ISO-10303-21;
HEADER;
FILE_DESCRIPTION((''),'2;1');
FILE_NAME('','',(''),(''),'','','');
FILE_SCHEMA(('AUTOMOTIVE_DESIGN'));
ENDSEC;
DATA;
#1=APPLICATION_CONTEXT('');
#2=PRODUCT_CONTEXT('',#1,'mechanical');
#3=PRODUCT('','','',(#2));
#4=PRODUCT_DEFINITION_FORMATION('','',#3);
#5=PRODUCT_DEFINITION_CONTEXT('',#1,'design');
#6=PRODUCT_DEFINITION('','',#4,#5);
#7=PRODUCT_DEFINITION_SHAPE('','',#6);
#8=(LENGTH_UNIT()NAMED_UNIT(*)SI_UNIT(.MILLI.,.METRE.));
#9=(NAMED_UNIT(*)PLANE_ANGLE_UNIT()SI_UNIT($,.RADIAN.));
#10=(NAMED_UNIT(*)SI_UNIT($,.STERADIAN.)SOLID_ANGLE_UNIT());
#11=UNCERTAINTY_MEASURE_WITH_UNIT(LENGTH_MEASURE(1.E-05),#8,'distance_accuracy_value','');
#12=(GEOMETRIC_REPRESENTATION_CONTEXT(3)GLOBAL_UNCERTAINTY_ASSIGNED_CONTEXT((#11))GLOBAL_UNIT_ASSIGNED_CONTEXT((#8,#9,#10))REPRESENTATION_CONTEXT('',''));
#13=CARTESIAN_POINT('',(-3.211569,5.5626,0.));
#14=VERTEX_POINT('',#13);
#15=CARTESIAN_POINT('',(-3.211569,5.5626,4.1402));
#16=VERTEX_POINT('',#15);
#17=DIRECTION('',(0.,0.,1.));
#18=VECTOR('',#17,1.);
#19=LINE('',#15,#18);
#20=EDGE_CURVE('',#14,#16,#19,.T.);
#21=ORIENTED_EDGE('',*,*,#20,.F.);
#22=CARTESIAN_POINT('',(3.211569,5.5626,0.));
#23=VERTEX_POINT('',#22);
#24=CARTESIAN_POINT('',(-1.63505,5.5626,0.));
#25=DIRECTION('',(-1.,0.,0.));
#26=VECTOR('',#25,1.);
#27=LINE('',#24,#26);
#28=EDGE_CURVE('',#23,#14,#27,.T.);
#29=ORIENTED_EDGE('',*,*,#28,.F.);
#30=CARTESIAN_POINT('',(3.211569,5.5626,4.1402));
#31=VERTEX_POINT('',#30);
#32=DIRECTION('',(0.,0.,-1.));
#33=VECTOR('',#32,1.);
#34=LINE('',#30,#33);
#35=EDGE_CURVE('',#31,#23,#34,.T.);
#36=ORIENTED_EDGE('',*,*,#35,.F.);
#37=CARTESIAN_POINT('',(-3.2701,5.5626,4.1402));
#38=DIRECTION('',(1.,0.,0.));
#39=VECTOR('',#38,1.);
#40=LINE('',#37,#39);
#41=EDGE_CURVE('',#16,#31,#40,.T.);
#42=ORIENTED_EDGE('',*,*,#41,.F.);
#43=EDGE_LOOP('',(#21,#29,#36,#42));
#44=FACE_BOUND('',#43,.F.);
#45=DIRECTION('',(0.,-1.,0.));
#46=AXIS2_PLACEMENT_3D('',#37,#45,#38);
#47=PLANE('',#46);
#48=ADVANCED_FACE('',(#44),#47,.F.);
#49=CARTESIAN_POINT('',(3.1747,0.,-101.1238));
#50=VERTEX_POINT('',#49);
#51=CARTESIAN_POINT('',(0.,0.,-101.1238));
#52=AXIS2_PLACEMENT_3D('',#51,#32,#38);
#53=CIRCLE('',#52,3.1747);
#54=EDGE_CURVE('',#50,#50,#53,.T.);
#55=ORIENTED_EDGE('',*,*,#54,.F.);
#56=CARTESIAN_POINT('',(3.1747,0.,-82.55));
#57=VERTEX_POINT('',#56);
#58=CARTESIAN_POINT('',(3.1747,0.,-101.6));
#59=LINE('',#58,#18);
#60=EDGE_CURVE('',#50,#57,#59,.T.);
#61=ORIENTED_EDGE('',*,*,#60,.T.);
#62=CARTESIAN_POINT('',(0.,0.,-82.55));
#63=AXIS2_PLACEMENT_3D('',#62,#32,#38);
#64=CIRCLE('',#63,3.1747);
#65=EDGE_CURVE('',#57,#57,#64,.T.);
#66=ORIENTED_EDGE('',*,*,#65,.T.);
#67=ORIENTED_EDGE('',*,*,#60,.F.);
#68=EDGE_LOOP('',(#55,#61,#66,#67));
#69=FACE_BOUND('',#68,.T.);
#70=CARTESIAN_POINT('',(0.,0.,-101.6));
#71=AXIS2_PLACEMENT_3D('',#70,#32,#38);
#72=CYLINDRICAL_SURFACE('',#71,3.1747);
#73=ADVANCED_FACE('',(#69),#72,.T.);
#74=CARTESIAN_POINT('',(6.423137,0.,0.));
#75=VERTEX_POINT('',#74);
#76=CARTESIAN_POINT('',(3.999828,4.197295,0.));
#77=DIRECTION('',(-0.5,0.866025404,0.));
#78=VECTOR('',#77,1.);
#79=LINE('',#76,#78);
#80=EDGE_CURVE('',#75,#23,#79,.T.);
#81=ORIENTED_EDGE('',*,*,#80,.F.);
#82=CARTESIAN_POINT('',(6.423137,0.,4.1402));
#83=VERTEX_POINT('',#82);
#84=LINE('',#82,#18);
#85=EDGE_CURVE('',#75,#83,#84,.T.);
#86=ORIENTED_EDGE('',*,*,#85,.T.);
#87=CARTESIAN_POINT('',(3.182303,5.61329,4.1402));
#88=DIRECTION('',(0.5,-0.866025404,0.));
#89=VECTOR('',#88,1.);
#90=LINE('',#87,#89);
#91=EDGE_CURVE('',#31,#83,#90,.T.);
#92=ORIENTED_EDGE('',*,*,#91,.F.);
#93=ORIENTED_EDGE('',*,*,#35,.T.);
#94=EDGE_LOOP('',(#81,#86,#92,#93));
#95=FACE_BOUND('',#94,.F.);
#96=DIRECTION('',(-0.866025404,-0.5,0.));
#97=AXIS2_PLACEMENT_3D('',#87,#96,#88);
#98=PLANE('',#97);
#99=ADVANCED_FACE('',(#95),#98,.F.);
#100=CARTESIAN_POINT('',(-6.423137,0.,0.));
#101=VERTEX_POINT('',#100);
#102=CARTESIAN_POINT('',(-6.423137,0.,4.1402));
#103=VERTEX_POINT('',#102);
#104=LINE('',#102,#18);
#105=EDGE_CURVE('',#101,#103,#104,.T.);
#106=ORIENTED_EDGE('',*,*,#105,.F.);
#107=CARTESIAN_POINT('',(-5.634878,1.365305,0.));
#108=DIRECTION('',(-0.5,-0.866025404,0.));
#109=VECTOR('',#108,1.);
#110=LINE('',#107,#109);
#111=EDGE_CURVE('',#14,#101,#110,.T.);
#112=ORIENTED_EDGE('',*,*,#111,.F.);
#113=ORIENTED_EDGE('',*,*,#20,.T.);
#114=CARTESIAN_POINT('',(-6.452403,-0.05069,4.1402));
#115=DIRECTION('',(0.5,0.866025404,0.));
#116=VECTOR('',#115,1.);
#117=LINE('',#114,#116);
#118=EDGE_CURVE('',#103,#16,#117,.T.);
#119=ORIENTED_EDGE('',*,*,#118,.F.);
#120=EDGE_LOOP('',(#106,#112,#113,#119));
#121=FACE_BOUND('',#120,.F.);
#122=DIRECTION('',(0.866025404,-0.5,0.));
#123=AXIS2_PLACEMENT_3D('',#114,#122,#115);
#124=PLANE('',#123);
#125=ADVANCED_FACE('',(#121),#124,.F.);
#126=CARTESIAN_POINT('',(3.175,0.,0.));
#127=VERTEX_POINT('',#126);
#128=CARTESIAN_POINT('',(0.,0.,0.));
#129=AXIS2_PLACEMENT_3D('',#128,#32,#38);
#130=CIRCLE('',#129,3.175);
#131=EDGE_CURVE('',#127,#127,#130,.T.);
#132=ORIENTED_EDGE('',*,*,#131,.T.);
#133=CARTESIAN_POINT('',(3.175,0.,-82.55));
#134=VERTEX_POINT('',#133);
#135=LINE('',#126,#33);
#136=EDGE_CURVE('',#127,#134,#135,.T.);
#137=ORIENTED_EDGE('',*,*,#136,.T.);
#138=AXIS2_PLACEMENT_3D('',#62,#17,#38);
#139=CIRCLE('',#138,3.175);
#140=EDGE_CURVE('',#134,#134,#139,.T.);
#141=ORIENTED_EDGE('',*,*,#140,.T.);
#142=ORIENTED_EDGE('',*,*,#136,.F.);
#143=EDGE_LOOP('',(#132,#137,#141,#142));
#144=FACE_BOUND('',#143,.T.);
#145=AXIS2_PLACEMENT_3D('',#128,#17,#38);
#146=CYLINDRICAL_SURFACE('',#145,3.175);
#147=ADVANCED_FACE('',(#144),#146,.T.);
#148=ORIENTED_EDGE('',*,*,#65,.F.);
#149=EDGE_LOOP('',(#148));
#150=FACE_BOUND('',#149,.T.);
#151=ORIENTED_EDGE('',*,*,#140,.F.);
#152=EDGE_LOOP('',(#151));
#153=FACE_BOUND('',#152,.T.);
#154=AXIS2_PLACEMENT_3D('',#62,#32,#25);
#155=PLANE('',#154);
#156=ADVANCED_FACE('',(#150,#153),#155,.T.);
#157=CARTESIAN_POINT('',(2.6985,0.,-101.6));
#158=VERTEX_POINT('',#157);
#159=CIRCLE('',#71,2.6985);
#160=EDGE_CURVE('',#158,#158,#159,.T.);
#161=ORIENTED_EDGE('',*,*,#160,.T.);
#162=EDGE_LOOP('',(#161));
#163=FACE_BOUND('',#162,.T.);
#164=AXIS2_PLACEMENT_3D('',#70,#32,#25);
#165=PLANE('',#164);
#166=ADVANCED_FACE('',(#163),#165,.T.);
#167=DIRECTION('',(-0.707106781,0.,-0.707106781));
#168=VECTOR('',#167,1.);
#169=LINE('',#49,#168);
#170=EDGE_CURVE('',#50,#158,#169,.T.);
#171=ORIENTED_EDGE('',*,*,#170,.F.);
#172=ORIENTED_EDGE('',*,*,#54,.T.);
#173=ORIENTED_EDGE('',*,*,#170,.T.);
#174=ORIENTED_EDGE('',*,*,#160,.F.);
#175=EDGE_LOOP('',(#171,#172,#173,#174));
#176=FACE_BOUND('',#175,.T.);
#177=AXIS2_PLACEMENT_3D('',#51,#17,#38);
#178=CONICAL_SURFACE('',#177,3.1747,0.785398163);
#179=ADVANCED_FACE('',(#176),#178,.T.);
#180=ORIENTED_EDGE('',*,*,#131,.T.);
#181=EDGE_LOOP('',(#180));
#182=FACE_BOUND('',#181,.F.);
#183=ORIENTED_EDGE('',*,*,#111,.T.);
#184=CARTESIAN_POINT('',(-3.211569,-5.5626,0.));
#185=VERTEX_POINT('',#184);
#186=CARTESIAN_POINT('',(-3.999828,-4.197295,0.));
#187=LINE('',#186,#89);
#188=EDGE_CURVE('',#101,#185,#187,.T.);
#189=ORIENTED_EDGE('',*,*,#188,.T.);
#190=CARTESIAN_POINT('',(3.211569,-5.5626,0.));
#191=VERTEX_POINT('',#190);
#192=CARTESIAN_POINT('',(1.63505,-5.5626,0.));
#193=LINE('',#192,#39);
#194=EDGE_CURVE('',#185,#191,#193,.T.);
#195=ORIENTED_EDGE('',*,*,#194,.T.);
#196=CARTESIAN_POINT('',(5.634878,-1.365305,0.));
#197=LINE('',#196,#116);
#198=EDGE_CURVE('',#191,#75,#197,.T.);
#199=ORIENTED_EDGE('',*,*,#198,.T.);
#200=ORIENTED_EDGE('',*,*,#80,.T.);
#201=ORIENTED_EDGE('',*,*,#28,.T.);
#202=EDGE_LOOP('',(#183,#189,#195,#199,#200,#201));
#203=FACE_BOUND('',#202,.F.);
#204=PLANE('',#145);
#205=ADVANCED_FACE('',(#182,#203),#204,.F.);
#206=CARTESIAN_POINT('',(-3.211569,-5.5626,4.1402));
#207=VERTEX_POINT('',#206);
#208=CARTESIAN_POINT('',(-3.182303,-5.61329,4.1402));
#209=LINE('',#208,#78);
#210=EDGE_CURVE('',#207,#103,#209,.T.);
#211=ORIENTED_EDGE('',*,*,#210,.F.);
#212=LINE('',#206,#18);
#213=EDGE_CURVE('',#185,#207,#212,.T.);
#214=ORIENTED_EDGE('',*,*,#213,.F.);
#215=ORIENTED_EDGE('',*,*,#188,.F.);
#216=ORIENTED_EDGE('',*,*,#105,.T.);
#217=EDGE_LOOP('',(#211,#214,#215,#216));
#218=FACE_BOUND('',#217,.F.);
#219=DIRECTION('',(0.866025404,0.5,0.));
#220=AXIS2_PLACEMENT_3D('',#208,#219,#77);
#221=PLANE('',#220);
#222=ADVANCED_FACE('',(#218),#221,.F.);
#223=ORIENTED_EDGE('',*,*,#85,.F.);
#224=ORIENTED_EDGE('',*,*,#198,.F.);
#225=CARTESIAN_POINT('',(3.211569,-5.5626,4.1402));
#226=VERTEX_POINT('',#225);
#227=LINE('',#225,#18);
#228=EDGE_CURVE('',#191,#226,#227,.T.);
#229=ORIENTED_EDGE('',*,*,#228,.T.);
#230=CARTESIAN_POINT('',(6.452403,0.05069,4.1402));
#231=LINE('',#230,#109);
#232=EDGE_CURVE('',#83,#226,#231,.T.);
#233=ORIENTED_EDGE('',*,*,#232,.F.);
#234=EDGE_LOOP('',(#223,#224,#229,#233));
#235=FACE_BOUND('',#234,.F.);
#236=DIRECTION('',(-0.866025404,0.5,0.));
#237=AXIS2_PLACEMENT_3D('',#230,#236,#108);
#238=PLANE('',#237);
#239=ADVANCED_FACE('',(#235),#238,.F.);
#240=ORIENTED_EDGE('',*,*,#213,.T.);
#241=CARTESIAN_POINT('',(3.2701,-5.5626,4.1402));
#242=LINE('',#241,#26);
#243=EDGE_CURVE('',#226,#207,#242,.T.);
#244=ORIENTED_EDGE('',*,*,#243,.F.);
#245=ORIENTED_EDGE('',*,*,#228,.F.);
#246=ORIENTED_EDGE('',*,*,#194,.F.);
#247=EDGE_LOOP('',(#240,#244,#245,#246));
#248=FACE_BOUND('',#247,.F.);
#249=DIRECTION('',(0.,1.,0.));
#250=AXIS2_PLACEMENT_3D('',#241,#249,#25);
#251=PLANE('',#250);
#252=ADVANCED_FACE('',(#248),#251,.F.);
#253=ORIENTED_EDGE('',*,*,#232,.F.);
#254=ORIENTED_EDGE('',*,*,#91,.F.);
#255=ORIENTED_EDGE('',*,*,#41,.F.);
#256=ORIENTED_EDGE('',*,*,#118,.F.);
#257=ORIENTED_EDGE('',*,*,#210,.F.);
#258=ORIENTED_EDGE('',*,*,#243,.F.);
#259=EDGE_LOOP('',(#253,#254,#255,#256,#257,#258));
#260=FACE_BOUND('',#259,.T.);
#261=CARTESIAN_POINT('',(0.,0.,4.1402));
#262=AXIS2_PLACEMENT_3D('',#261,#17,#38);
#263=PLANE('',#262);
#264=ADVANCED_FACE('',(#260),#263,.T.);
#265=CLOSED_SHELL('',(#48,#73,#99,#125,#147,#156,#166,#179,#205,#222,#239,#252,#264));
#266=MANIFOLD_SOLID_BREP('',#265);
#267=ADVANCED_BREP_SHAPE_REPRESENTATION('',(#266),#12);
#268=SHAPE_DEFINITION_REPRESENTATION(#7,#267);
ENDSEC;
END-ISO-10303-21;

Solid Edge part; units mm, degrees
sketch "Sketch1" plane through (0, 0, 0) normal (0, 0, 1) x (1, 0, 0)
  circle A0 centre (0, 0) radius 6.4526
  dimension "D1" = 12.9052
extrude "Protrusion1" add sketch "Sketch1" along normal blind 4.1402
sketch "Sketch2" plane through (0, 0, 0) normal (0, 0, -1) x (1, 0, 0)
  circle A0 centre (0, 0) radius 3.175
extrude "Protrusion2" add sketch "Sketch2" along normal blind 101.6
sketch "Sketch3" plane through (0, 0, -101.6) normal (0, 0, -1) x (1, 0, 0)
  circle A0 centre (0, 0) radius 3.1747
extrude "Cutout1" cut sketch "Sketch3" against normal blind 19.05 flip side to cut
chamfer "Chamfer_1" distance 0.4762 angle 45 1 edges at (-3.1747, 0, -101.6)
sketch "Sketch4" plane through (0, 0, 4.1402) normal (0, 0, 1) x (1, 0, 0)
  line L0 (-3.2701, 5.5626) -> (3.2701, 5.5626)
  dimension "D1" = 11.1252
extrude "Cutout2" cut sketch "Sketch4" against normal up to next material side at (0, 5.6126, 4.1402)
pattern_circular "Pattern1" count 6 over 360 about axis through (0, 0, 4.1402) along (0, 0, 1) of "Cutout2"
properties part number "24103676"
